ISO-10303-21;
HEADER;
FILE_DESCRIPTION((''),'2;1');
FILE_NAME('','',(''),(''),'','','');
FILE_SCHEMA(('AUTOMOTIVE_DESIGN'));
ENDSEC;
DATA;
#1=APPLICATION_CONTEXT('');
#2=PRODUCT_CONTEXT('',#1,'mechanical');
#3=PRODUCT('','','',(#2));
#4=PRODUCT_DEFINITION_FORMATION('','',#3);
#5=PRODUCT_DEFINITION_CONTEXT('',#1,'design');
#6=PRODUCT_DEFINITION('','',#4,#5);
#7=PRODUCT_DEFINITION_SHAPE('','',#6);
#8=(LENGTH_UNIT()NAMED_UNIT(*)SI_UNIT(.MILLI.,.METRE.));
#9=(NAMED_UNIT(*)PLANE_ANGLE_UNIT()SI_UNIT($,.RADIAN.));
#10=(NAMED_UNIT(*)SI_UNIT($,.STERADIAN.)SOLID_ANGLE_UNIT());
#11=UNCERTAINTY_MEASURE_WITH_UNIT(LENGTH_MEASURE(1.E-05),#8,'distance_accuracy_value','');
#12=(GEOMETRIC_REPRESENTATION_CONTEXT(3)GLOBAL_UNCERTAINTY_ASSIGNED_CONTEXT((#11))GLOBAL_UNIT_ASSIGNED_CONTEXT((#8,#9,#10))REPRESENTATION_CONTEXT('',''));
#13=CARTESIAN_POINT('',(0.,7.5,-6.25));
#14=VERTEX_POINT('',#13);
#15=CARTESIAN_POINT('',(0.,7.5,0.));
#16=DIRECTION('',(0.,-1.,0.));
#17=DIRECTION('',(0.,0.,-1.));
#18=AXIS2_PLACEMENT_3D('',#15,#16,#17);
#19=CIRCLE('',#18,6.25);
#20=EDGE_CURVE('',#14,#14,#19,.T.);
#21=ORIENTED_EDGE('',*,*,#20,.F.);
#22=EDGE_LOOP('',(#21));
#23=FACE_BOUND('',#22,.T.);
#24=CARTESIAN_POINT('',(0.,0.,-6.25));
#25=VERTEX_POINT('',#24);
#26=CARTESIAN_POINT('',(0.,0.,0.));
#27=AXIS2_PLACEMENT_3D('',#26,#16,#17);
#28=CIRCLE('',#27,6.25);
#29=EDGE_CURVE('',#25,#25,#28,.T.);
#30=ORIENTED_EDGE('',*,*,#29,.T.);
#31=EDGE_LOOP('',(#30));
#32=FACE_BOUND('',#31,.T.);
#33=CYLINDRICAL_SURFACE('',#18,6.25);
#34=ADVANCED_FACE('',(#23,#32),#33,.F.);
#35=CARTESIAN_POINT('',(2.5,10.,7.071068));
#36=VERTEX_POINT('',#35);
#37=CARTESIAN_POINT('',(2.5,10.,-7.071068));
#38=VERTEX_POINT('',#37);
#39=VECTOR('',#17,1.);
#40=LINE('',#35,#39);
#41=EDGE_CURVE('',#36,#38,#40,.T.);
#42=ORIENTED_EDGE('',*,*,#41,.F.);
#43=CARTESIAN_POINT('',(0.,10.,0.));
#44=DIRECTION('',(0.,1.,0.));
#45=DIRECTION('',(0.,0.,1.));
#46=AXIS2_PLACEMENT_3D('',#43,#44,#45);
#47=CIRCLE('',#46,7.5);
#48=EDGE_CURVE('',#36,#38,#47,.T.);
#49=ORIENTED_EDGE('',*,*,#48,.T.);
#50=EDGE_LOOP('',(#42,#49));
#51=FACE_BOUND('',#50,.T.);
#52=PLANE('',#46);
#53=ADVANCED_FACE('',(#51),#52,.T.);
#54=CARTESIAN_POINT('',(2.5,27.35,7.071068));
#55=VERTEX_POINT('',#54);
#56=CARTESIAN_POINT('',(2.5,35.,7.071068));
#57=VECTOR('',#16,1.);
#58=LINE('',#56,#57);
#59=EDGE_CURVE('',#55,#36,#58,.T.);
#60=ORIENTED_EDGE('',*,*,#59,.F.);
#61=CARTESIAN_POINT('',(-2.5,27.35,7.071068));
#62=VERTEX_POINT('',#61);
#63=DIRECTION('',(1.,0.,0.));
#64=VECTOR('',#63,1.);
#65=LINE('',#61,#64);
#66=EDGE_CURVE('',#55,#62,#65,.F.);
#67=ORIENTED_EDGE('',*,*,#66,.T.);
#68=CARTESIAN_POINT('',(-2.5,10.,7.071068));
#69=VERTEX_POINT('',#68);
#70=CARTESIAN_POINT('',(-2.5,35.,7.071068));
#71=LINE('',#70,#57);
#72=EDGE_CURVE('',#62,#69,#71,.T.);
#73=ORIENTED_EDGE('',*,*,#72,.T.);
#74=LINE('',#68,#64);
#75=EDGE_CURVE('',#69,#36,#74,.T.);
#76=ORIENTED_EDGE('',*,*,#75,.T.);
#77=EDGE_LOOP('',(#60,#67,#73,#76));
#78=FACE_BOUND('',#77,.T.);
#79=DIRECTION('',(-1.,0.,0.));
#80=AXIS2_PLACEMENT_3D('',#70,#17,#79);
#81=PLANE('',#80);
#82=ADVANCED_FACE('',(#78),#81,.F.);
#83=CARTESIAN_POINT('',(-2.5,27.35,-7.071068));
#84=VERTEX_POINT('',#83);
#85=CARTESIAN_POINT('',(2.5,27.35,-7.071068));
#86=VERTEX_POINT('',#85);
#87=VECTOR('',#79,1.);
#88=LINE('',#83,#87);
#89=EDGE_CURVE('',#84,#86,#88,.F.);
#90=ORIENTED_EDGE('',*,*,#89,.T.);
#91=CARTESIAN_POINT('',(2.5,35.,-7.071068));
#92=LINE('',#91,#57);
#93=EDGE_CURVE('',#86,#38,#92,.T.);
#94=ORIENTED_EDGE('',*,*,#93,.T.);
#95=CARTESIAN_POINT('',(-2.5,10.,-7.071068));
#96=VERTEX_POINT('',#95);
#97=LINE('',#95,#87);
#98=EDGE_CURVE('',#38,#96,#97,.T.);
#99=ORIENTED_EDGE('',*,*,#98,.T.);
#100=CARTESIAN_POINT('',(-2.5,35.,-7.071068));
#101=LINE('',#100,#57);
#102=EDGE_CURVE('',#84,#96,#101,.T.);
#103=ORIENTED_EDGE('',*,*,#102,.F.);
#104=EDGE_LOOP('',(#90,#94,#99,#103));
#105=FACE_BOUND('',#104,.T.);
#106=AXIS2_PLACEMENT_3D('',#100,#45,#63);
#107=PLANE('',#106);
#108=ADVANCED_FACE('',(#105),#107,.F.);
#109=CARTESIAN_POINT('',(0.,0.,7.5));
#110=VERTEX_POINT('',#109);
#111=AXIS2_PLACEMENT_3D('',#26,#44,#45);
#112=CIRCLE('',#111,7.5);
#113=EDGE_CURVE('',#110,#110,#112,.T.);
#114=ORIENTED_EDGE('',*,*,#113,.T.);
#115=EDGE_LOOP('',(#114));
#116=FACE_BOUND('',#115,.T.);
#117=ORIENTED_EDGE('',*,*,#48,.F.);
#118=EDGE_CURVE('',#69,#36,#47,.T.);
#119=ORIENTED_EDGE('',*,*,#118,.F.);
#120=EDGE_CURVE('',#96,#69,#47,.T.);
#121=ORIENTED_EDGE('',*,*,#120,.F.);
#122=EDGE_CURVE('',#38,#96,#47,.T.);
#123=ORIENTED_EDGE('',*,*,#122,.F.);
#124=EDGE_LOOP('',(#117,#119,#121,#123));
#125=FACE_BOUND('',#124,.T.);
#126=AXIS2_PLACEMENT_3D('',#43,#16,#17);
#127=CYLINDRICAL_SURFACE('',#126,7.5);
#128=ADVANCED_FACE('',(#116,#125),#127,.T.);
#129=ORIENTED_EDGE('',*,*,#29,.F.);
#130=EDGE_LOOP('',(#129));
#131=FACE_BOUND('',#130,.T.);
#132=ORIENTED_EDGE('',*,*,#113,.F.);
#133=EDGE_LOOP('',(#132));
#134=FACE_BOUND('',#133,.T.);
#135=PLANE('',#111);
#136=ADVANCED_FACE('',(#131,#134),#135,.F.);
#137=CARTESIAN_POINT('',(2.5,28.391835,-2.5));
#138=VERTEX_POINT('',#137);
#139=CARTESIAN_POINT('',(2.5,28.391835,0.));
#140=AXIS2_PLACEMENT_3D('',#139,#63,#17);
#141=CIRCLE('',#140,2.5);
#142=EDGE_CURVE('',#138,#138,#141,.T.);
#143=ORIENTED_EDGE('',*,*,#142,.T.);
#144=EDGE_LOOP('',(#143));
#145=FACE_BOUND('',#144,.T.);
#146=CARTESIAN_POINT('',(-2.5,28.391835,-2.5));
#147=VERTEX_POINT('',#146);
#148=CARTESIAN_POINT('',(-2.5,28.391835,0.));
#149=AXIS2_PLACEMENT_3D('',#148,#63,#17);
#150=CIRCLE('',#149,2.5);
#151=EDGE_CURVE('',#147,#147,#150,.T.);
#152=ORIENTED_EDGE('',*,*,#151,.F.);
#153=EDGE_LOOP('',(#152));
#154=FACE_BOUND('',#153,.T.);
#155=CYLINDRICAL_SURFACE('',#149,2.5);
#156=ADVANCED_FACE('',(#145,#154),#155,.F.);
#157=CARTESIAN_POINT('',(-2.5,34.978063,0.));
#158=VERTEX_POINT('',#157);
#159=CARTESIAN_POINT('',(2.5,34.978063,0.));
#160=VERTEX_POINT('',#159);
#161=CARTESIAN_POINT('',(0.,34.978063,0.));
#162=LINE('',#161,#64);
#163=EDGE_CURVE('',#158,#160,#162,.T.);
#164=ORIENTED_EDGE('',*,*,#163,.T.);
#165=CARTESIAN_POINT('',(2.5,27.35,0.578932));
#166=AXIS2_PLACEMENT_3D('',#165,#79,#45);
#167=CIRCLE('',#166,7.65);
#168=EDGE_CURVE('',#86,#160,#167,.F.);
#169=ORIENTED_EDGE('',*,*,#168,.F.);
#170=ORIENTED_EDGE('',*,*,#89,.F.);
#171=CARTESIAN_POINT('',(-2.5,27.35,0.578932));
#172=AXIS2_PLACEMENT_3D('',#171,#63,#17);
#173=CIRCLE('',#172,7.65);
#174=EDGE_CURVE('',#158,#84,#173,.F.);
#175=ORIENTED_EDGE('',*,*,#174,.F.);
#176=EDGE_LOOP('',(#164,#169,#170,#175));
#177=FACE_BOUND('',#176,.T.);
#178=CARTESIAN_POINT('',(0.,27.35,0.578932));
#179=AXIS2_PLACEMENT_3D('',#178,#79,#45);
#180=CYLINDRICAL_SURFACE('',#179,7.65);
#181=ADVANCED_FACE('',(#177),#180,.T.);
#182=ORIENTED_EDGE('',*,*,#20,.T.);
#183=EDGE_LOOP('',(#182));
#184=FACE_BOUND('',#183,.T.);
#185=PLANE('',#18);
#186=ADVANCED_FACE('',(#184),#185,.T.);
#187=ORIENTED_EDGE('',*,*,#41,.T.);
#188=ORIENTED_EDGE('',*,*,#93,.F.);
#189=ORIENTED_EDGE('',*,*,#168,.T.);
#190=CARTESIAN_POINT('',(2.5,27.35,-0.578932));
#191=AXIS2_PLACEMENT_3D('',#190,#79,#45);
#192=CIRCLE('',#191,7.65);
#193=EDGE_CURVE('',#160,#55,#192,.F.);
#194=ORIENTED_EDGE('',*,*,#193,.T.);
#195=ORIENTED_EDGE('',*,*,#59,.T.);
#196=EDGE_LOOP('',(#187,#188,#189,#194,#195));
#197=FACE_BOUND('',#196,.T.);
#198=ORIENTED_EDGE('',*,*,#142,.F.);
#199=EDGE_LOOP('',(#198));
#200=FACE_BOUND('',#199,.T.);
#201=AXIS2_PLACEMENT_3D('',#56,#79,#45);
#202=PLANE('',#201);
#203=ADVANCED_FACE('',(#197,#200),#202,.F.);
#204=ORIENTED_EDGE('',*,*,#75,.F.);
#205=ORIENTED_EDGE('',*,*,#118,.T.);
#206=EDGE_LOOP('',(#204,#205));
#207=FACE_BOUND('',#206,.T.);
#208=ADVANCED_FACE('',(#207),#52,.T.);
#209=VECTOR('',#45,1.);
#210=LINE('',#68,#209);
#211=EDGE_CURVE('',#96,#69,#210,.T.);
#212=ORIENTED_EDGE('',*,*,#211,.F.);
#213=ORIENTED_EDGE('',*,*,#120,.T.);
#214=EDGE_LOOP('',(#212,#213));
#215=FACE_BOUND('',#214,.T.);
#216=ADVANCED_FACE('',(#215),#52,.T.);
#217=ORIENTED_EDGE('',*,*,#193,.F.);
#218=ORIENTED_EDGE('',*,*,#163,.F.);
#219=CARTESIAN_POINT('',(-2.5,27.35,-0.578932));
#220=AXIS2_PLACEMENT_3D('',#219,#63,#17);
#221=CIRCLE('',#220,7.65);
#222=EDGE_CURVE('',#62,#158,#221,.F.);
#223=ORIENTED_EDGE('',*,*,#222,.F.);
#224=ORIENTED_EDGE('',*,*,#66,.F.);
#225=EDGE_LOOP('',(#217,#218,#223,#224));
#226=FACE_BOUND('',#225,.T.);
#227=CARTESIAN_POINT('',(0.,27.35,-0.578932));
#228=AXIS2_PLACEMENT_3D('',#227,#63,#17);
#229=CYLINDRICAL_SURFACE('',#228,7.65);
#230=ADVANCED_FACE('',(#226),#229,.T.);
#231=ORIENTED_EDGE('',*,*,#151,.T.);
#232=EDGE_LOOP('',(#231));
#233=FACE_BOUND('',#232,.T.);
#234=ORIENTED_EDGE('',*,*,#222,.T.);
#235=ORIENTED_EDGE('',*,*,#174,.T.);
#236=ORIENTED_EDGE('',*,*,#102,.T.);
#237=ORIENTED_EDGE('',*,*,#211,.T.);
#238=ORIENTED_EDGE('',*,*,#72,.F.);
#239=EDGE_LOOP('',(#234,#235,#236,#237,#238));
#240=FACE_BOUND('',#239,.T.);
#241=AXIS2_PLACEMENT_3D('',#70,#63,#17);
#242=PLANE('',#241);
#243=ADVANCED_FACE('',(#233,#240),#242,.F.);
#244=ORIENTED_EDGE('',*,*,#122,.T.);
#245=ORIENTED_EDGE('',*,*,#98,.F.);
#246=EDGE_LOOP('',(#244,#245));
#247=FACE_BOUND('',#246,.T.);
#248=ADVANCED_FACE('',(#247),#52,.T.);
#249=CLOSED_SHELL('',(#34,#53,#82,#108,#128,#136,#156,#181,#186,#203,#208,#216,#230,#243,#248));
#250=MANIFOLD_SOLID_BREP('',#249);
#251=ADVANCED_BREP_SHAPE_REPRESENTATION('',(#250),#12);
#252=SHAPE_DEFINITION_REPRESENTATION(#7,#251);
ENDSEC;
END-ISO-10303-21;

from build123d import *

# Parameters (mm, degrees)
SKETCH1_R           = 7.5
BOSS_EXTRUDE1_DEPTH = 10
SKETCH2_R           = 6.25
CUT_EXTRUDE2_DEPTH  = 7.5
SKETCH3_W           = 5
SKETCH3_H           = 14.142135624
BOSS_EXTRUDE2_DEPTH = 25
SKETCH4_R           = 2.5
CUT_EXTRUDE3_DEPTH  = 5
FILLET1_R           = 7.65


with BuildPart() as part:
    # Sketch1 → Boss-Extrude1 (new body)
    with BuildSketch(Plane(origin=(0, 0, 0), x_dir=(1, 0, 0), z_dir=(0, 1, 0))):
        with Locations(Location((0, 0, 0), (0, 0, 270))):
            Circle(SKETCH1_R)
    extrude(amount=BOSS_EXTRUDE1_DEPTH)

    # Sketch2 → Cut-Extrude2 (cut)
    with BuildSketch(Plane.XZ):
        with Locations(Location((0, 0, 0), (0, 0, 270))):
            Circle(SKETCH2_R)
    extrude(amount=-CUT_EXTRUDE2_DEPTH, mode=Mode.SUBTRACT)

    # Sketch3 → Boss-Extrude2 (add)
    with BuildSketch(Plane(origin=(0, 10, 0), x_dir=(1, 0, 0), z_dir=(0, 1, 0))):
        Rectangle(SKETCH3_W, SKETCH3_H)
    extrude(amount=BOSS_EXTRUDE2_DEPTH)

    # Sketch4 → Cut-Extrude3 (cut)
    with BuildSketch(Plane(origin=(2.5, 0, 0), x_dir=(0, 0, -1), z_dir=(1, 0, 0))):
        with Locations((0, 28.391835492)):
            Circle(SKETCH4_R)
    extrude(amount=-CUT_EXTRUDE3_DEPTH, mode=Mode.SUBTRACT)

    # Fillet1
    # the kernel refuses this fillet: 7.65 mm, written as the material it takes off along each edge
    with BuildSketch(Plane(origin=(21.625, 35, -7.071067812), x_dir=(0, -1, 0), z_dir=(-1, 0, 0)), Plane(origin=(-21.625, 35, 7.071067812), x_dir=(0, -1, 0), z_dir=(1, 0, 0))) as fillet1_piece_1:
        with BuildLine():
            CenterArc((FILLET1_R, FILLET1_R), FILLET1_R, 180, 90)
            Line((0, FILLET1_R), (0, 0))
            Line((0, 0), (FILLET1_R, 0))
        make_face()
    extrude(amount=43.25, mode=Mode.SUBTRACT)


solid = part.part
